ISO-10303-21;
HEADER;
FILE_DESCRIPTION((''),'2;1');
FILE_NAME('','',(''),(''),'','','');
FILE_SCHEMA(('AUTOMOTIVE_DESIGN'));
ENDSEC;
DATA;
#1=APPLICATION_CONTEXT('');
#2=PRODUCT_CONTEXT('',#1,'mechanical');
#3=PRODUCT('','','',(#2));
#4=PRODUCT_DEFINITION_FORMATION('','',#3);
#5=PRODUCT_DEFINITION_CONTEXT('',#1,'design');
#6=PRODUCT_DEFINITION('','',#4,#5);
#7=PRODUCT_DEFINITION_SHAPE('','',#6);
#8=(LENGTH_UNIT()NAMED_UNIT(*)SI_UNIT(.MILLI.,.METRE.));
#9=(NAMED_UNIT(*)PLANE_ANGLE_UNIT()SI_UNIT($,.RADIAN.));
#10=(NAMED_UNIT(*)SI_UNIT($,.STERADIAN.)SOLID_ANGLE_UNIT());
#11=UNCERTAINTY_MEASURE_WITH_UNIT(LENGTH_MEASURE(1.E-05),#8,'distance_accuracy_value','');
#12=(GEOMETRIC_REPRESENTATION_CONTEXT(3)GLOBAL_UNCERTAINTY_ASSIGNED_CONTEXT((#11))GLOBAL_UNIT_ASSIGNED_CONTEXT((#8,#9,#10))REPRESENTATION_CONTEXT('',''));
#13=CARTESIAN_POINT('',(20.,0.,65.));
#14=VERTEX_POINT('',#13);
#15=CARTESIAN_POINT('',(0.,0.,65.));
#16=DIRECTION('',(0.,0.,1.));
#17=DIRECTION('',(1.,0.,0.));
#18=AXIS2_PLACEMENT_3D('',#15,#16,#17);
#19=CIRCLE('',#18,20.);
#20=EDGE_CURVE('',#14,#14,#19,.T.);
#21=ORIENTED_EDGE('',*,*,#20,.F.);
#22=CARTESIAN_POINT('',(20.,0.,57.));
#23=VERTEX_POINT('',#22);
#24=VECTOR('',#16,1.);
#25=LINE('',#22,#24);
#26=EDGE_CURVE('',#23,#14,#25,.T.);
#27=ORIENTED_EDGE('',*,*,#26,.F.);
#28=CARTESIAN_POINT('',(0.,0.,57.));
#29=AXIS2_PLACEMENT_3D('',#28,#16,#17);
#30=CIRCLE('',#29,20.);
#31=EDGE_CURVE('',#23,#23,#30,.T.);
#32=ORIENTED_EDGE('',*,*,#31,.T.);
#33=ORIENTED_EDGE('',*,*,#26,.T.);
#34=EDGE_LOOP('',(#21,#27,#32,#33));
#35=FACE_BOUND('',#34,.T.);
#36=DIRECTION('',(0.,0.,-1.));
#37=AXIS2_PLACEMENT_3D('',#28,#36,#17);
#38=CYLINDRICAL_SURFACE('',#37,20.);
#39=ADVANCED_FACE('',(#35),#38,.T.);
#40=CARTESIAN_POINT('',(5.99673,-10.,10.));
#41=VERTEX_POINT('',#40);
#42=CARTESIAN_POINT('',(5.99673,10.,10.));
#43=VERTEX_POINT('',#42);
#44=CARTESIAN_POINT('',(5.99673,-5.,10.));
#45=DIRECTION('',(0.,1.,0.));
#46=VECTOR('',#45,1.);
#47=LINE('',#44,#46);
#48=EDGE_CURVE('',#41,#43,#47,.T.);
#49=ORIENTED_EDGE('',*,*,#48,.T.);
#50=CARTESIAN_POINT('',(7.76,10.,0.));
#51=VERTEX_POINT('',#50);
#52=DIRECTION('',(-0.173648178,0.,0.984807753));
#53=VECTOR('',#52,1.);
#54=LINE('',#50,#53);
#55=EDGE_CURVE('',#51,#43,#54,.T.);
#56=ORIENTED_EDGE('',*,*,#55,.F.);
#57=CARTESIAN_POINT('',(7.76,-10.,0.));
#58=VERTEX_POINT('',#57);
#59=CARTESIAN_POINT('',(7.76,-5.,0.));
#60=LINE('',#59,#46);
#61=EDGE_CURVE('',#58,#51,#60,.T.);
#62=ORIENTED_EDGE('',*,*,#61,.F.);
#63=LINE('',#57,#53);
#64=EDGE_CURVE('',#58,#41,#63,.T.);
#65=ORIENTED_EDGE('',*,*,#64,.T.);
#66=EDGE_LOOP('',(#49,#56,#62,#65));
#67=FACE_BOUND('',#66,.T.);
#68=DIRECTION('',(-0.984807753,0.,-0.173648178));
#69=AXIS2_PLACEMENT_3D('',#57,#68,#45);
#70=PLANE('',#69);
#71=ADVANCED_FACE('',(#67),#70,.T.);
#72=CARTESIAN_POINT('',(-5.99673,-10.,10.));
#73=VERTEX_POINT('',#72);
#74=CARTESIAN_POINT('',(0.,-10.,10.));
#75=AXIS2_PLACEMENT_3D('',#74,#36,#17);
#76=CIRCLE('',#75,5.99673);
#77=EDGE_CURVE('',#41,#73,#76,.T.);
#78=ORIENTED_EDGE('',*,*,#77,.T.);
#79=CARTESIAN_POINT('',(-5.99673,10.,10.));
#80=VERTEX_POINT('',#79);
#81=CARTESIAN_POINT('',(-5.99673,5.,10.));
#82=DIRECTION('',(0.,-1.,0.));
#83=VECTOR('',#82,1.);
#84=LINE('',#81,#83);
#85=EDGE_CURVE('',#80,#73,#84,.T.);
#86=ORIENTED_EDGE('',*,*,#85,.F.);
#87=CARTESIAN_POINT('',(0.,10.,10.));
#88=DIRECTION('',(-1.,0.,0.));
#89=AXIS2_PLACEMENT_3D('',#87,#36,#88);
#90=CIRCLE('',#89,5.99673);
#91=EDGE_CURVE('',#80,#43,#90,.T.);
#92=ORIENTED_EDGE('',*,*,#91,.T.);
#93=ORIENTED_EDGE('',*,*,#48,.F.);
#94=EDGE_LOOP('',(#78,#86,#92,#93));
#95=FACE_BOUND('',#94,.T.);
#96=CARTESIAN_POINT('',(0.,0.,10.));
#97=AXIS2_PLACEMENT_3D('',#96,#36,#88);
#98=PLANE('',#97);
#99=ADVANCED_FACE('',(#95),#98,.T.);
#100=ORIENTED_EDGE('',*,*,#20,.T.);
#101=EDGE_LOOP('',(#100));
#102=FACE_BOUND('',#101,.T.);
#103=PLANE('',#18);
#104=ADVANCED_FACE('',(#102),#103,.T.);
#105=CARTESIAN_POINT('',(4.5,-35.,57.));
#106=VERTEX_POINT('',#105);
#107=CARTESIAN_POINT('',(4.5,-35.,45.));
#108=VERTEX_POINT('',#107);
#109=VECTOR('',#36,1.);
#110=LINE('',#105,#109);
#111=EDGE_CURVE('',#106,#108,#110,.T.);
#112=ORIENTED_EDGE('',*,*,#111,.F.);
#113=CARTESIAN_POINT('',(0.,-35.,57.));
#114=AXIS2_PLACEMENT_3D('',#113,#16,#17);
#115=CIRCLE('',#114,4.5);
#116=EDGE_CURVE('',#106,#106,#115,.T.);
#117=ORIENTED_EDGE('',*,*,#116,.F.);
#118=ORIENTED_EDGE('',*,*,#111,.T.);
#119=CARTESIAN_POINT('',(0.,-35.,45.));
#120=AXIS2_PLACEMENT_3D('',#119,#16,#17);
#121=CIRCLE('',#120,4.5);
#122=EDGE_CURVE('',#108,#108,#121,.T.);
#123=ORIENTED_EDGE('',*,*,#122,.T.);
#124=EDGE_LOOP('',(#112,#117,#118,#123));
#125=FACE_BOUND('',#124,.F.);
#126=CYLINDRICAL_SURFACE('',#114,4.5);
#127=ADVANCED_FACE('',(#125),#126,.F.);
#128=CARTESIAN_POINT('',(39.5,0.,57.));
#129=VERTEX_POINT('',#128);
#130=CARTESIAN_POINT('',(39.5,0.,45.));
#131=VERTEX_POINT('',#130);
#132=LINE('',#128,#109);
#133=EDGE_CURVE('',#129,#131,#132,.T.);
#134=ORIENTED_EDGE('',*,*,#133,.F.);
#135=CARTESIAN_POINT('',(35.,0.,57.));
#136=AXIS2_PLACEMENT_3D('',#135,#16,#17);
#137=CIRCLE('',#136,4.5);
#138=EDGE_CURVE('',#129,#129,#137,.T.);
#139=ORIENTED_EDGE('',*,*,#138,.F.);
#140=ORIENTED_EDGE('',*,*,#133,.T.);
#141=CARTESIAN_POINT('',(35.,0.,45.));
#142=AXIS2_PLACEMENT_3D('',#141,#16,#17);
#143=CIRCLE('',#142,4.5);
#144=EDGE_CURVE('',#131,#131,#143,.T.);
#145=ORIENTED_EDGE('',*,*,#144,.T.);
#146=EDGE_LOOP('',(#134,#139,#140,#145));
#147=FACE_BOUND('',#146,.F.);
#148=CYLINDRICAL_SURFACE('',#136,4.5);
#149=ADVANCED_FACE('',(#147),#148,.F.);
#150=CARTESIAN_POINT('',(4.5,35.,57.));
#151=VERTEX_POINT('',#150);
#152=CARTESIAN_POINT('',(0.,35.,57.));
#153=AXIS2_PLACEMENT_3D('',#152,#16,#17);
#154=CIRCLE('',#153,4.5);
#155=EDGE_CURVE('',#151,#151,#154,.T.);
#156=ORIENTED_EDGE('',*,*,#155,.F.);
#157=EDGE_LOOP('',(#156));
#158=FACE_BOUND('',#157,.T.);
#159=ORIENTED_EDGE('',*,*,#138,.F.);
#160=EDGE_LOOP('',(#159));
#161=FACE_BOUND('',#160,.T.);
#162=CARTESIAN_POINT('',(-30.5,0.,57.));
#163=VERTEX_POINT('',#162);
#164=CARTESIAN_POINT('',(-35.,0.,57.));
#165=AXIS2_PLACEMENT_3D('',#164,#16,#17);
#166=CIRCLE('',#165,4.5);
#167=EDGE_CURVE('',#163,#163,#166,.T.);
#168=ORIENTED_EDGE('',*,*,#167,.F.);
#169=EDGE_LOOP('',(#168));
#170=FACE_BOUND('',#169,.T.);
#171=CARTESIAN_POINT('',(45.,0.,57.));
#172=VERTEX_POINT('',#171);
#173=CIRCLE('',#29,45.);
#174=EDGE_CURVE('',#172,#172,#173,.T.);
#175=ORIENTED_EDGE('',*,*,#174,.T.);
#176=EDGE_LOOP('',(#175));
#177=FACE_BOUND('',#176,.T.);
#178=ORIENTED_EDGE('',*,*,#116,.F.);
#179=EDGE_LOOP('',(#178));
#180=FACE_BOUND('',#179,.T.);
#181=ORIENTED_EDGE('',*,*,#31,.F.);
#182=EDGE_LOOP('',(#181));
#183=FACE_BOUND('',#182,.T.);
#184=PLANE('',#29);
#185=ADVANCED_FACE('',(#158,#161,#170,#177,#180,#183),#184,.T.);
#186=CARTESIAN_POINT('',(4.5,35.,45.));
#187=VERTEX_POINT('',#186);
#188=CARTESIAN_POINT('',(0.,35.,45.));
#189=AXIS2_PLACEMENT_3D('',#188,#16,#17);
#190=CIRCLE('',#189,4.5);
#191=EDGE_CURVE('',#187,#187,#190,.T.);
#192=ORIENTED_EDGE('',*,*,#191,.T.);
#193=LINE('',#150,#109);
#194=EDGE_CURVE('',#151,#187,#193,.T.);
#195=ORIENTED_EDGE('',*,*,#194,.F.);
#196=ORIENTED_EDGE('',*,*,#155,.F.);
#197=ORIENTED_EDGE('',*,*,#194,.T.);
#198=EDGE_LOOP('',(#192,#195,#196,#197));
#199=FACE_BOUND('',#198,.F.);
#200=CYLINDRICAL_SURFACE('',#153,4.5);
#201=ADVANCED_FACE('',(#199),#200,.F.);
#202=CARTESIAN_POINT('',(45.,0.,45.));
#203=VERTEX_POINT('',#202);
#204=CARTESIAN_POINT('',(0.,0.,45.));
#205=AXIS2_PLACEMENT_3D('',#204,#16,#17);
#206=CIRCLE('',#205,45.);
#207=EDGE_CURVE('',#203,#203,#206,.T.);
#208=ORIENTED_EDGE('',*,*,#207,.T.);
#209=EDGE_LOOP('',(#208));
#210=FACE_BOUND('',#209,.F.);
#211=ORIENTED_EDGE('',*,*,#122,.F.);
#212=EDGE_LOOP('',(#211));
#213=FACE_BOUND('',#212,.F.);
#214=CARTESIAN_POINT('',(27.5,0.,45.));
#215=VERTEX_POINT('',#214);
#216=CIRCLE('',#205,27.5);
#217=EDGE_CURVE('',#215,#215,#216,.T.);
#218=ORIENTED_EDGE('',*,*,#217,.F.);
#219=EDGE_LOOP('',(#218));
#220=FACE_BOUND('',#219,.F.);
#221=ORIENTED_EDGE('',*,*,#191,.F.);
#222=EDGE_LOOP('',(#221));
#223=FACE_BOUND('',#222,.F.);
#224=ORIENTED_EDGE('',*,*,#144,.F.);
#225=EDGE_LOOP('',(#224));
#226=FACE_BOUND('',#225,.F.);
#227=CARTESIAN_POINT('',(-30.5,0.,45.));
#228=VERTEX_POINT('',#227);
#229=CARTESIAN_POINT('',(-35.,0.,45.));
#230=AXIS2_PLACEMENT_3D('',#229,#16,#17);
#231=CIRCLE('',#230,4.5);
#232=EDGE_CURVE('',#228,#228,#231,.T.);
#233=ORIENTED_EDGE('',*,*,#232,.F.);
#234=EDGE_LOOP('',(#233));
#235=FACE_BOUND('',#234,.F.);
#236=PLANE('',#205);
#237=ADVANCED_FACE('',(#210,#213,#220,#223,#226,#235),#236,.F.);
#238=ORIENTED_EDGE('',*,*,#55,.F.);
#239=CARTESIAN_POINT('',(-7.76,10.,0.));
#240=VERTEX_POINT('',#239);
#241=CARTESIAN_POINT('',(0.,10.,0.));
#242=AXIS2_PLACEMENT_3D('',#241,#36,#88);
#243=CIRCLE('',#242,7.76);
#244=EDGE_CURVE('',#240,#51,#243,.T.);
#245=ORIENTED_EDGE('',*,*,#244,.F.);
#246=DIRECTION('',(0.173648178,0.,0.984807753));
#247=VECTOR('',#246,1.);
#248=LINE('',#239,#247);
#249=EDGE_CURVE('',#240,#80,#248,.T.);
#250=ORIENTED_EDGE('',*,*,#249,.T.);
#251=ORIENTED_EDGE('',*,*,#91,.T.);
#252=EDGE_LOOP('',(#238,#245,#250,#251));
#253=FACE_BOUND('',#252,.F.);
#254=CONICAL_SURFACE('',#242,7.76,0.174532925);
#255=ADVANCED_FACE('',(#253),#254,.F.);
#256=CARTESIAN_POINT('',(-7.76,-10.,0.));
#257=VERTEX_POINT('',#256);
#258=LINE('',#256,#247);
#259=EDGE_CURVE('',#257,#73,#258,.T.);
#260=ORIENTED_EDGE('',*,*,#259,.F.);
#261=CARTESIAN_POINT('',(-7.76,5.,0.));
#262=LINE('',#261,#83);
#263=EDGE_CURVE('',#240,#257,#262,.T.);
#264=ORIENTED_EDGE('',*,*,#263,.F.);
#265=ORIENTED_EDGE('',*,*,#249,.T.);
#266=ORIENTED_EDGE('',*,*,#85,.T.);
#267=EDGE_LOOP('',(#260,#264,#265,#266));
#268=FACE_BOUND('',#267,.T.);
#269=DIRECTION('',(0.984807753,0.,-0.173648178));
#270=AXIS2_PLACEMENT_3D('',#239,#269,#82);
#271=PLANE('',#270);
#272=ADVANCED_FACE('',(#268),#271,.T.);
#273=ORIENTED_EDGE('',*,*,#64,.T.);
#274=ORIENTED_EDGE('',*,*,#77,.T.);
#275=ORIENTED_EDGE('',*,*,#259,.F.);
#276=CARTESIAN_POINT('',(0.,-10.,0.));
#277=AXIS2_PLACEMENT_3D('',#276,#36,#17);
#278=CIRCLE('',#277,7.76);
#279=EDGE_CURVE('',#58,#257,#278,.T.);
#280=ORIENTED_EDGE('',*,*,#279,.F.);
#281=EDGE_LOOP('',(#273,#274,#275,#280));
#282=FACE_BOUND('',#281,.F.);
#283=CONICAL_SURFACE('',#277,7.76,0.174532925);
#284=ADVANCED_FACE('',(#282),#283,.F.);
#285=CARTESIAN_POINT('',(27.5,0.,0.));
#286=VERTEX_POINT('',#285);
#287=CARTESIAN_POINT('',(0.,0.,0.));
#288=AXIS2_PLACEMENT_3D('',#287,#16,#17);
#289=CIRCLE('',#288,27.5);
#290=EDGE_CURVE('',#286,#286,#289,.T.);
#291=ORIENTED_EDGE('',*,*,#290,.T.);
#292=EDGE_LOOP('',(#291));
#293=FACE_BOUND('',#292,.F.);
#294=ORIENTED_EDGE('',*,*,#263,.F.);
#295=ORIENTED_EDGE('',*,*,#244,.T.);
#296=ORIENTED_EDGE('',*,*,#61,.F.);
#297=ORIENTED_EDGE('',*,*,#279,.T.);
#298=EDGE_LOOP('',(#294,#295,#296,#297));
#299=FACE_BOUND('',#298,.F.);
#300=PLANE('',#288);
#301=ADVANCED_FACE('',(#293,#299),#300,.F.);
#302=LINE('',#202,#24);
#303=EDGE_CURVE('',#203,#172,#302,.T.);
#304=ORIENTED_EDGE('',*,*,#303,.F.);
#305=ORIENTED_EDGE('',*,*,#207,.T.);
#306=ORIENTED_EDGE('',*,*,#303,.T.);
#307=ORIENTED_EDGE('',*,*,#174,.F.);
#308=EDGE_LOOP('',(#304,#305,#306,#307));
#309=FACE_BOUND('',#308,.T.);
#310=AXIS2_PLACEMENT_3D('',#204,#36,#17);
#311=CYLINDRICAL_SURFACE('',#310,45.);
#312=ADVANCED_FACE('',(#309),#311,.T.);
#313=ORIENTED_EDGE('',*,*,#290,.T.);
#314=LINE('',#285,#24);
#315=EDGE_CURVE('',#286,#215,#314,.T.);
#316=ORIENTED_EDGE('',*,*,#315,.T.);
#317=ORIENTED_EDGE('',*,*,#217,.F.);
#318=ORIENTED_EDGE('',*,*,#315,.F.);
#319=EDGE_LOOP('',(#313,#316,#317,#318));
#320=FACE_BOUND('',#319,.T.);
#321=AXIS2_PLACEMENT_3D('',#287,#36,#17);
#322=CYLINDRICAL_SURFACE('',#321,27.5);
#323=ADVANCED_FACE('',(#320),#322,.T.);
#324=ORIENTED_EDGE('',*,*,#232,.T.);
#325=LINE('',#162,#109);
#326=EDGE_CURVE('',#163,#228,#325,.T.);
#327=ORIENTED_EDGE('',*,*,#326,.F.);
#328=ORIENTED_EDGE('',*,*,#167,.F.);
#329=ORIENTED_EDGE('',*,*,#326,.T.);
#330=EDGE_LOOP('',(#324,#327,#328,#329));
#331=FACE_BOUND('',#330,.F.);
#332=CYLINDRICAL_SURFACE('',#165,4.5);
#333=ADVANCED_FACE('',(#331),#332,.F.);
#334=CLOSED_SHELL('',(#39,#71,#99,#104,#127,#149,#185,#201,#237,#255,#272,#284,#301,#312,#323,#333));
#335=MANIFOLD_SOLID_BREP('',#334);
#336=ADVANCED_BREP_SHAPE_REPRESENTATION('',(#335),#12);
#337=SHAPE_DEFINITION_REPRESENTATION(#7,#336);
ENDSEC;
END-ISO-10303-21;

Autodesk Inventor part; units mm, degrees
ref_plane "YZ Plane" through (0, 0, 0) normal (1, 0, 0) x (0, 1, 0)
ref_plane "XZ Plane" through (0, 0, 0) normal (0, 1, 0) x (-1, 0, 0)
ref_plane "XY Plane" through (0, 0, 0) normal (0, 0, 1) x (1, 0, 0)
sketch "Esboço1" plane through (0, 0, 0) normal (0, 0, 1) x (1, 0, 0)
  circle A0 centre (0, 0) radius 27.5
  dimension "d0" = 55
extrude "Extrusão1" add sketch "Esboço1" along normal blind 45
sketch "Esboço2" plane through (0, 0, 45) normal (0, 0, 1) x (1, 0, 0)
  circle A0 centre (0, 0) radius 45
  dimension "d3" = 90
extrude "Extrusão2" add sketch "Esboço2" along normal blind 12
sketch "Esboço3" plane through (0, 0, 57) normal (0, 0, 1) x (1, 0, 0)
  circle A0 centre (35, 0) radius 4.5
  circle A1 centre (0, 35) radius 4.5
  circle A2 centre (-35, 0) radius 4.5
  circle A3 centre (0, -35) radius 4.5
  point P0 (0, 0)
  dimension "d7" = 9
  dimension "d8" = 35
  dimension "d11" = 360
extrude "Extrusão3" cut sketch "Esboço3" against normal blind 17.5
sketch "Esboço4" plane through (0, 0, 57) normal (0, 0, 1) x (1, 0, 0)
  circle A0 centre (0, 0) radius 27.5 projected
  circle A1 centre (0, 0) radius 20
  dimension "d15" = 40
extrude "Extrusão4" add sketch "Esboço4" along normal blind 8 contours A1
sketch "Esboço6" plane through (0, 0, 0) normal (0, 0, -1) x (-1, 0, 0)
  line L0 (0, 10) -> (0, -10) construction
  line L1 (7.76, 10) -> (7.76, -10)
  line L2 (-7.76, -10) -> (-7.76, 10)
  arc A0 (7.76, 10) -> (-7.76, 10) centre (0, 10) ccw
  arc A1 (-7.76, -10) -> (7.76, -10) centre (0, -10) ccw
  point P0 (0, 0)
  point P1 (0, 0)
  dimension "d24" = 7.76
  dimension "d25" = 20
  dimension "d26" = 0
  dimension "d27" = 0
extrude "Extrusão5" cut sketch "Esboço6" against normal blind 10 draft -10
properties part number "Matriz inferior do Ferramental"
